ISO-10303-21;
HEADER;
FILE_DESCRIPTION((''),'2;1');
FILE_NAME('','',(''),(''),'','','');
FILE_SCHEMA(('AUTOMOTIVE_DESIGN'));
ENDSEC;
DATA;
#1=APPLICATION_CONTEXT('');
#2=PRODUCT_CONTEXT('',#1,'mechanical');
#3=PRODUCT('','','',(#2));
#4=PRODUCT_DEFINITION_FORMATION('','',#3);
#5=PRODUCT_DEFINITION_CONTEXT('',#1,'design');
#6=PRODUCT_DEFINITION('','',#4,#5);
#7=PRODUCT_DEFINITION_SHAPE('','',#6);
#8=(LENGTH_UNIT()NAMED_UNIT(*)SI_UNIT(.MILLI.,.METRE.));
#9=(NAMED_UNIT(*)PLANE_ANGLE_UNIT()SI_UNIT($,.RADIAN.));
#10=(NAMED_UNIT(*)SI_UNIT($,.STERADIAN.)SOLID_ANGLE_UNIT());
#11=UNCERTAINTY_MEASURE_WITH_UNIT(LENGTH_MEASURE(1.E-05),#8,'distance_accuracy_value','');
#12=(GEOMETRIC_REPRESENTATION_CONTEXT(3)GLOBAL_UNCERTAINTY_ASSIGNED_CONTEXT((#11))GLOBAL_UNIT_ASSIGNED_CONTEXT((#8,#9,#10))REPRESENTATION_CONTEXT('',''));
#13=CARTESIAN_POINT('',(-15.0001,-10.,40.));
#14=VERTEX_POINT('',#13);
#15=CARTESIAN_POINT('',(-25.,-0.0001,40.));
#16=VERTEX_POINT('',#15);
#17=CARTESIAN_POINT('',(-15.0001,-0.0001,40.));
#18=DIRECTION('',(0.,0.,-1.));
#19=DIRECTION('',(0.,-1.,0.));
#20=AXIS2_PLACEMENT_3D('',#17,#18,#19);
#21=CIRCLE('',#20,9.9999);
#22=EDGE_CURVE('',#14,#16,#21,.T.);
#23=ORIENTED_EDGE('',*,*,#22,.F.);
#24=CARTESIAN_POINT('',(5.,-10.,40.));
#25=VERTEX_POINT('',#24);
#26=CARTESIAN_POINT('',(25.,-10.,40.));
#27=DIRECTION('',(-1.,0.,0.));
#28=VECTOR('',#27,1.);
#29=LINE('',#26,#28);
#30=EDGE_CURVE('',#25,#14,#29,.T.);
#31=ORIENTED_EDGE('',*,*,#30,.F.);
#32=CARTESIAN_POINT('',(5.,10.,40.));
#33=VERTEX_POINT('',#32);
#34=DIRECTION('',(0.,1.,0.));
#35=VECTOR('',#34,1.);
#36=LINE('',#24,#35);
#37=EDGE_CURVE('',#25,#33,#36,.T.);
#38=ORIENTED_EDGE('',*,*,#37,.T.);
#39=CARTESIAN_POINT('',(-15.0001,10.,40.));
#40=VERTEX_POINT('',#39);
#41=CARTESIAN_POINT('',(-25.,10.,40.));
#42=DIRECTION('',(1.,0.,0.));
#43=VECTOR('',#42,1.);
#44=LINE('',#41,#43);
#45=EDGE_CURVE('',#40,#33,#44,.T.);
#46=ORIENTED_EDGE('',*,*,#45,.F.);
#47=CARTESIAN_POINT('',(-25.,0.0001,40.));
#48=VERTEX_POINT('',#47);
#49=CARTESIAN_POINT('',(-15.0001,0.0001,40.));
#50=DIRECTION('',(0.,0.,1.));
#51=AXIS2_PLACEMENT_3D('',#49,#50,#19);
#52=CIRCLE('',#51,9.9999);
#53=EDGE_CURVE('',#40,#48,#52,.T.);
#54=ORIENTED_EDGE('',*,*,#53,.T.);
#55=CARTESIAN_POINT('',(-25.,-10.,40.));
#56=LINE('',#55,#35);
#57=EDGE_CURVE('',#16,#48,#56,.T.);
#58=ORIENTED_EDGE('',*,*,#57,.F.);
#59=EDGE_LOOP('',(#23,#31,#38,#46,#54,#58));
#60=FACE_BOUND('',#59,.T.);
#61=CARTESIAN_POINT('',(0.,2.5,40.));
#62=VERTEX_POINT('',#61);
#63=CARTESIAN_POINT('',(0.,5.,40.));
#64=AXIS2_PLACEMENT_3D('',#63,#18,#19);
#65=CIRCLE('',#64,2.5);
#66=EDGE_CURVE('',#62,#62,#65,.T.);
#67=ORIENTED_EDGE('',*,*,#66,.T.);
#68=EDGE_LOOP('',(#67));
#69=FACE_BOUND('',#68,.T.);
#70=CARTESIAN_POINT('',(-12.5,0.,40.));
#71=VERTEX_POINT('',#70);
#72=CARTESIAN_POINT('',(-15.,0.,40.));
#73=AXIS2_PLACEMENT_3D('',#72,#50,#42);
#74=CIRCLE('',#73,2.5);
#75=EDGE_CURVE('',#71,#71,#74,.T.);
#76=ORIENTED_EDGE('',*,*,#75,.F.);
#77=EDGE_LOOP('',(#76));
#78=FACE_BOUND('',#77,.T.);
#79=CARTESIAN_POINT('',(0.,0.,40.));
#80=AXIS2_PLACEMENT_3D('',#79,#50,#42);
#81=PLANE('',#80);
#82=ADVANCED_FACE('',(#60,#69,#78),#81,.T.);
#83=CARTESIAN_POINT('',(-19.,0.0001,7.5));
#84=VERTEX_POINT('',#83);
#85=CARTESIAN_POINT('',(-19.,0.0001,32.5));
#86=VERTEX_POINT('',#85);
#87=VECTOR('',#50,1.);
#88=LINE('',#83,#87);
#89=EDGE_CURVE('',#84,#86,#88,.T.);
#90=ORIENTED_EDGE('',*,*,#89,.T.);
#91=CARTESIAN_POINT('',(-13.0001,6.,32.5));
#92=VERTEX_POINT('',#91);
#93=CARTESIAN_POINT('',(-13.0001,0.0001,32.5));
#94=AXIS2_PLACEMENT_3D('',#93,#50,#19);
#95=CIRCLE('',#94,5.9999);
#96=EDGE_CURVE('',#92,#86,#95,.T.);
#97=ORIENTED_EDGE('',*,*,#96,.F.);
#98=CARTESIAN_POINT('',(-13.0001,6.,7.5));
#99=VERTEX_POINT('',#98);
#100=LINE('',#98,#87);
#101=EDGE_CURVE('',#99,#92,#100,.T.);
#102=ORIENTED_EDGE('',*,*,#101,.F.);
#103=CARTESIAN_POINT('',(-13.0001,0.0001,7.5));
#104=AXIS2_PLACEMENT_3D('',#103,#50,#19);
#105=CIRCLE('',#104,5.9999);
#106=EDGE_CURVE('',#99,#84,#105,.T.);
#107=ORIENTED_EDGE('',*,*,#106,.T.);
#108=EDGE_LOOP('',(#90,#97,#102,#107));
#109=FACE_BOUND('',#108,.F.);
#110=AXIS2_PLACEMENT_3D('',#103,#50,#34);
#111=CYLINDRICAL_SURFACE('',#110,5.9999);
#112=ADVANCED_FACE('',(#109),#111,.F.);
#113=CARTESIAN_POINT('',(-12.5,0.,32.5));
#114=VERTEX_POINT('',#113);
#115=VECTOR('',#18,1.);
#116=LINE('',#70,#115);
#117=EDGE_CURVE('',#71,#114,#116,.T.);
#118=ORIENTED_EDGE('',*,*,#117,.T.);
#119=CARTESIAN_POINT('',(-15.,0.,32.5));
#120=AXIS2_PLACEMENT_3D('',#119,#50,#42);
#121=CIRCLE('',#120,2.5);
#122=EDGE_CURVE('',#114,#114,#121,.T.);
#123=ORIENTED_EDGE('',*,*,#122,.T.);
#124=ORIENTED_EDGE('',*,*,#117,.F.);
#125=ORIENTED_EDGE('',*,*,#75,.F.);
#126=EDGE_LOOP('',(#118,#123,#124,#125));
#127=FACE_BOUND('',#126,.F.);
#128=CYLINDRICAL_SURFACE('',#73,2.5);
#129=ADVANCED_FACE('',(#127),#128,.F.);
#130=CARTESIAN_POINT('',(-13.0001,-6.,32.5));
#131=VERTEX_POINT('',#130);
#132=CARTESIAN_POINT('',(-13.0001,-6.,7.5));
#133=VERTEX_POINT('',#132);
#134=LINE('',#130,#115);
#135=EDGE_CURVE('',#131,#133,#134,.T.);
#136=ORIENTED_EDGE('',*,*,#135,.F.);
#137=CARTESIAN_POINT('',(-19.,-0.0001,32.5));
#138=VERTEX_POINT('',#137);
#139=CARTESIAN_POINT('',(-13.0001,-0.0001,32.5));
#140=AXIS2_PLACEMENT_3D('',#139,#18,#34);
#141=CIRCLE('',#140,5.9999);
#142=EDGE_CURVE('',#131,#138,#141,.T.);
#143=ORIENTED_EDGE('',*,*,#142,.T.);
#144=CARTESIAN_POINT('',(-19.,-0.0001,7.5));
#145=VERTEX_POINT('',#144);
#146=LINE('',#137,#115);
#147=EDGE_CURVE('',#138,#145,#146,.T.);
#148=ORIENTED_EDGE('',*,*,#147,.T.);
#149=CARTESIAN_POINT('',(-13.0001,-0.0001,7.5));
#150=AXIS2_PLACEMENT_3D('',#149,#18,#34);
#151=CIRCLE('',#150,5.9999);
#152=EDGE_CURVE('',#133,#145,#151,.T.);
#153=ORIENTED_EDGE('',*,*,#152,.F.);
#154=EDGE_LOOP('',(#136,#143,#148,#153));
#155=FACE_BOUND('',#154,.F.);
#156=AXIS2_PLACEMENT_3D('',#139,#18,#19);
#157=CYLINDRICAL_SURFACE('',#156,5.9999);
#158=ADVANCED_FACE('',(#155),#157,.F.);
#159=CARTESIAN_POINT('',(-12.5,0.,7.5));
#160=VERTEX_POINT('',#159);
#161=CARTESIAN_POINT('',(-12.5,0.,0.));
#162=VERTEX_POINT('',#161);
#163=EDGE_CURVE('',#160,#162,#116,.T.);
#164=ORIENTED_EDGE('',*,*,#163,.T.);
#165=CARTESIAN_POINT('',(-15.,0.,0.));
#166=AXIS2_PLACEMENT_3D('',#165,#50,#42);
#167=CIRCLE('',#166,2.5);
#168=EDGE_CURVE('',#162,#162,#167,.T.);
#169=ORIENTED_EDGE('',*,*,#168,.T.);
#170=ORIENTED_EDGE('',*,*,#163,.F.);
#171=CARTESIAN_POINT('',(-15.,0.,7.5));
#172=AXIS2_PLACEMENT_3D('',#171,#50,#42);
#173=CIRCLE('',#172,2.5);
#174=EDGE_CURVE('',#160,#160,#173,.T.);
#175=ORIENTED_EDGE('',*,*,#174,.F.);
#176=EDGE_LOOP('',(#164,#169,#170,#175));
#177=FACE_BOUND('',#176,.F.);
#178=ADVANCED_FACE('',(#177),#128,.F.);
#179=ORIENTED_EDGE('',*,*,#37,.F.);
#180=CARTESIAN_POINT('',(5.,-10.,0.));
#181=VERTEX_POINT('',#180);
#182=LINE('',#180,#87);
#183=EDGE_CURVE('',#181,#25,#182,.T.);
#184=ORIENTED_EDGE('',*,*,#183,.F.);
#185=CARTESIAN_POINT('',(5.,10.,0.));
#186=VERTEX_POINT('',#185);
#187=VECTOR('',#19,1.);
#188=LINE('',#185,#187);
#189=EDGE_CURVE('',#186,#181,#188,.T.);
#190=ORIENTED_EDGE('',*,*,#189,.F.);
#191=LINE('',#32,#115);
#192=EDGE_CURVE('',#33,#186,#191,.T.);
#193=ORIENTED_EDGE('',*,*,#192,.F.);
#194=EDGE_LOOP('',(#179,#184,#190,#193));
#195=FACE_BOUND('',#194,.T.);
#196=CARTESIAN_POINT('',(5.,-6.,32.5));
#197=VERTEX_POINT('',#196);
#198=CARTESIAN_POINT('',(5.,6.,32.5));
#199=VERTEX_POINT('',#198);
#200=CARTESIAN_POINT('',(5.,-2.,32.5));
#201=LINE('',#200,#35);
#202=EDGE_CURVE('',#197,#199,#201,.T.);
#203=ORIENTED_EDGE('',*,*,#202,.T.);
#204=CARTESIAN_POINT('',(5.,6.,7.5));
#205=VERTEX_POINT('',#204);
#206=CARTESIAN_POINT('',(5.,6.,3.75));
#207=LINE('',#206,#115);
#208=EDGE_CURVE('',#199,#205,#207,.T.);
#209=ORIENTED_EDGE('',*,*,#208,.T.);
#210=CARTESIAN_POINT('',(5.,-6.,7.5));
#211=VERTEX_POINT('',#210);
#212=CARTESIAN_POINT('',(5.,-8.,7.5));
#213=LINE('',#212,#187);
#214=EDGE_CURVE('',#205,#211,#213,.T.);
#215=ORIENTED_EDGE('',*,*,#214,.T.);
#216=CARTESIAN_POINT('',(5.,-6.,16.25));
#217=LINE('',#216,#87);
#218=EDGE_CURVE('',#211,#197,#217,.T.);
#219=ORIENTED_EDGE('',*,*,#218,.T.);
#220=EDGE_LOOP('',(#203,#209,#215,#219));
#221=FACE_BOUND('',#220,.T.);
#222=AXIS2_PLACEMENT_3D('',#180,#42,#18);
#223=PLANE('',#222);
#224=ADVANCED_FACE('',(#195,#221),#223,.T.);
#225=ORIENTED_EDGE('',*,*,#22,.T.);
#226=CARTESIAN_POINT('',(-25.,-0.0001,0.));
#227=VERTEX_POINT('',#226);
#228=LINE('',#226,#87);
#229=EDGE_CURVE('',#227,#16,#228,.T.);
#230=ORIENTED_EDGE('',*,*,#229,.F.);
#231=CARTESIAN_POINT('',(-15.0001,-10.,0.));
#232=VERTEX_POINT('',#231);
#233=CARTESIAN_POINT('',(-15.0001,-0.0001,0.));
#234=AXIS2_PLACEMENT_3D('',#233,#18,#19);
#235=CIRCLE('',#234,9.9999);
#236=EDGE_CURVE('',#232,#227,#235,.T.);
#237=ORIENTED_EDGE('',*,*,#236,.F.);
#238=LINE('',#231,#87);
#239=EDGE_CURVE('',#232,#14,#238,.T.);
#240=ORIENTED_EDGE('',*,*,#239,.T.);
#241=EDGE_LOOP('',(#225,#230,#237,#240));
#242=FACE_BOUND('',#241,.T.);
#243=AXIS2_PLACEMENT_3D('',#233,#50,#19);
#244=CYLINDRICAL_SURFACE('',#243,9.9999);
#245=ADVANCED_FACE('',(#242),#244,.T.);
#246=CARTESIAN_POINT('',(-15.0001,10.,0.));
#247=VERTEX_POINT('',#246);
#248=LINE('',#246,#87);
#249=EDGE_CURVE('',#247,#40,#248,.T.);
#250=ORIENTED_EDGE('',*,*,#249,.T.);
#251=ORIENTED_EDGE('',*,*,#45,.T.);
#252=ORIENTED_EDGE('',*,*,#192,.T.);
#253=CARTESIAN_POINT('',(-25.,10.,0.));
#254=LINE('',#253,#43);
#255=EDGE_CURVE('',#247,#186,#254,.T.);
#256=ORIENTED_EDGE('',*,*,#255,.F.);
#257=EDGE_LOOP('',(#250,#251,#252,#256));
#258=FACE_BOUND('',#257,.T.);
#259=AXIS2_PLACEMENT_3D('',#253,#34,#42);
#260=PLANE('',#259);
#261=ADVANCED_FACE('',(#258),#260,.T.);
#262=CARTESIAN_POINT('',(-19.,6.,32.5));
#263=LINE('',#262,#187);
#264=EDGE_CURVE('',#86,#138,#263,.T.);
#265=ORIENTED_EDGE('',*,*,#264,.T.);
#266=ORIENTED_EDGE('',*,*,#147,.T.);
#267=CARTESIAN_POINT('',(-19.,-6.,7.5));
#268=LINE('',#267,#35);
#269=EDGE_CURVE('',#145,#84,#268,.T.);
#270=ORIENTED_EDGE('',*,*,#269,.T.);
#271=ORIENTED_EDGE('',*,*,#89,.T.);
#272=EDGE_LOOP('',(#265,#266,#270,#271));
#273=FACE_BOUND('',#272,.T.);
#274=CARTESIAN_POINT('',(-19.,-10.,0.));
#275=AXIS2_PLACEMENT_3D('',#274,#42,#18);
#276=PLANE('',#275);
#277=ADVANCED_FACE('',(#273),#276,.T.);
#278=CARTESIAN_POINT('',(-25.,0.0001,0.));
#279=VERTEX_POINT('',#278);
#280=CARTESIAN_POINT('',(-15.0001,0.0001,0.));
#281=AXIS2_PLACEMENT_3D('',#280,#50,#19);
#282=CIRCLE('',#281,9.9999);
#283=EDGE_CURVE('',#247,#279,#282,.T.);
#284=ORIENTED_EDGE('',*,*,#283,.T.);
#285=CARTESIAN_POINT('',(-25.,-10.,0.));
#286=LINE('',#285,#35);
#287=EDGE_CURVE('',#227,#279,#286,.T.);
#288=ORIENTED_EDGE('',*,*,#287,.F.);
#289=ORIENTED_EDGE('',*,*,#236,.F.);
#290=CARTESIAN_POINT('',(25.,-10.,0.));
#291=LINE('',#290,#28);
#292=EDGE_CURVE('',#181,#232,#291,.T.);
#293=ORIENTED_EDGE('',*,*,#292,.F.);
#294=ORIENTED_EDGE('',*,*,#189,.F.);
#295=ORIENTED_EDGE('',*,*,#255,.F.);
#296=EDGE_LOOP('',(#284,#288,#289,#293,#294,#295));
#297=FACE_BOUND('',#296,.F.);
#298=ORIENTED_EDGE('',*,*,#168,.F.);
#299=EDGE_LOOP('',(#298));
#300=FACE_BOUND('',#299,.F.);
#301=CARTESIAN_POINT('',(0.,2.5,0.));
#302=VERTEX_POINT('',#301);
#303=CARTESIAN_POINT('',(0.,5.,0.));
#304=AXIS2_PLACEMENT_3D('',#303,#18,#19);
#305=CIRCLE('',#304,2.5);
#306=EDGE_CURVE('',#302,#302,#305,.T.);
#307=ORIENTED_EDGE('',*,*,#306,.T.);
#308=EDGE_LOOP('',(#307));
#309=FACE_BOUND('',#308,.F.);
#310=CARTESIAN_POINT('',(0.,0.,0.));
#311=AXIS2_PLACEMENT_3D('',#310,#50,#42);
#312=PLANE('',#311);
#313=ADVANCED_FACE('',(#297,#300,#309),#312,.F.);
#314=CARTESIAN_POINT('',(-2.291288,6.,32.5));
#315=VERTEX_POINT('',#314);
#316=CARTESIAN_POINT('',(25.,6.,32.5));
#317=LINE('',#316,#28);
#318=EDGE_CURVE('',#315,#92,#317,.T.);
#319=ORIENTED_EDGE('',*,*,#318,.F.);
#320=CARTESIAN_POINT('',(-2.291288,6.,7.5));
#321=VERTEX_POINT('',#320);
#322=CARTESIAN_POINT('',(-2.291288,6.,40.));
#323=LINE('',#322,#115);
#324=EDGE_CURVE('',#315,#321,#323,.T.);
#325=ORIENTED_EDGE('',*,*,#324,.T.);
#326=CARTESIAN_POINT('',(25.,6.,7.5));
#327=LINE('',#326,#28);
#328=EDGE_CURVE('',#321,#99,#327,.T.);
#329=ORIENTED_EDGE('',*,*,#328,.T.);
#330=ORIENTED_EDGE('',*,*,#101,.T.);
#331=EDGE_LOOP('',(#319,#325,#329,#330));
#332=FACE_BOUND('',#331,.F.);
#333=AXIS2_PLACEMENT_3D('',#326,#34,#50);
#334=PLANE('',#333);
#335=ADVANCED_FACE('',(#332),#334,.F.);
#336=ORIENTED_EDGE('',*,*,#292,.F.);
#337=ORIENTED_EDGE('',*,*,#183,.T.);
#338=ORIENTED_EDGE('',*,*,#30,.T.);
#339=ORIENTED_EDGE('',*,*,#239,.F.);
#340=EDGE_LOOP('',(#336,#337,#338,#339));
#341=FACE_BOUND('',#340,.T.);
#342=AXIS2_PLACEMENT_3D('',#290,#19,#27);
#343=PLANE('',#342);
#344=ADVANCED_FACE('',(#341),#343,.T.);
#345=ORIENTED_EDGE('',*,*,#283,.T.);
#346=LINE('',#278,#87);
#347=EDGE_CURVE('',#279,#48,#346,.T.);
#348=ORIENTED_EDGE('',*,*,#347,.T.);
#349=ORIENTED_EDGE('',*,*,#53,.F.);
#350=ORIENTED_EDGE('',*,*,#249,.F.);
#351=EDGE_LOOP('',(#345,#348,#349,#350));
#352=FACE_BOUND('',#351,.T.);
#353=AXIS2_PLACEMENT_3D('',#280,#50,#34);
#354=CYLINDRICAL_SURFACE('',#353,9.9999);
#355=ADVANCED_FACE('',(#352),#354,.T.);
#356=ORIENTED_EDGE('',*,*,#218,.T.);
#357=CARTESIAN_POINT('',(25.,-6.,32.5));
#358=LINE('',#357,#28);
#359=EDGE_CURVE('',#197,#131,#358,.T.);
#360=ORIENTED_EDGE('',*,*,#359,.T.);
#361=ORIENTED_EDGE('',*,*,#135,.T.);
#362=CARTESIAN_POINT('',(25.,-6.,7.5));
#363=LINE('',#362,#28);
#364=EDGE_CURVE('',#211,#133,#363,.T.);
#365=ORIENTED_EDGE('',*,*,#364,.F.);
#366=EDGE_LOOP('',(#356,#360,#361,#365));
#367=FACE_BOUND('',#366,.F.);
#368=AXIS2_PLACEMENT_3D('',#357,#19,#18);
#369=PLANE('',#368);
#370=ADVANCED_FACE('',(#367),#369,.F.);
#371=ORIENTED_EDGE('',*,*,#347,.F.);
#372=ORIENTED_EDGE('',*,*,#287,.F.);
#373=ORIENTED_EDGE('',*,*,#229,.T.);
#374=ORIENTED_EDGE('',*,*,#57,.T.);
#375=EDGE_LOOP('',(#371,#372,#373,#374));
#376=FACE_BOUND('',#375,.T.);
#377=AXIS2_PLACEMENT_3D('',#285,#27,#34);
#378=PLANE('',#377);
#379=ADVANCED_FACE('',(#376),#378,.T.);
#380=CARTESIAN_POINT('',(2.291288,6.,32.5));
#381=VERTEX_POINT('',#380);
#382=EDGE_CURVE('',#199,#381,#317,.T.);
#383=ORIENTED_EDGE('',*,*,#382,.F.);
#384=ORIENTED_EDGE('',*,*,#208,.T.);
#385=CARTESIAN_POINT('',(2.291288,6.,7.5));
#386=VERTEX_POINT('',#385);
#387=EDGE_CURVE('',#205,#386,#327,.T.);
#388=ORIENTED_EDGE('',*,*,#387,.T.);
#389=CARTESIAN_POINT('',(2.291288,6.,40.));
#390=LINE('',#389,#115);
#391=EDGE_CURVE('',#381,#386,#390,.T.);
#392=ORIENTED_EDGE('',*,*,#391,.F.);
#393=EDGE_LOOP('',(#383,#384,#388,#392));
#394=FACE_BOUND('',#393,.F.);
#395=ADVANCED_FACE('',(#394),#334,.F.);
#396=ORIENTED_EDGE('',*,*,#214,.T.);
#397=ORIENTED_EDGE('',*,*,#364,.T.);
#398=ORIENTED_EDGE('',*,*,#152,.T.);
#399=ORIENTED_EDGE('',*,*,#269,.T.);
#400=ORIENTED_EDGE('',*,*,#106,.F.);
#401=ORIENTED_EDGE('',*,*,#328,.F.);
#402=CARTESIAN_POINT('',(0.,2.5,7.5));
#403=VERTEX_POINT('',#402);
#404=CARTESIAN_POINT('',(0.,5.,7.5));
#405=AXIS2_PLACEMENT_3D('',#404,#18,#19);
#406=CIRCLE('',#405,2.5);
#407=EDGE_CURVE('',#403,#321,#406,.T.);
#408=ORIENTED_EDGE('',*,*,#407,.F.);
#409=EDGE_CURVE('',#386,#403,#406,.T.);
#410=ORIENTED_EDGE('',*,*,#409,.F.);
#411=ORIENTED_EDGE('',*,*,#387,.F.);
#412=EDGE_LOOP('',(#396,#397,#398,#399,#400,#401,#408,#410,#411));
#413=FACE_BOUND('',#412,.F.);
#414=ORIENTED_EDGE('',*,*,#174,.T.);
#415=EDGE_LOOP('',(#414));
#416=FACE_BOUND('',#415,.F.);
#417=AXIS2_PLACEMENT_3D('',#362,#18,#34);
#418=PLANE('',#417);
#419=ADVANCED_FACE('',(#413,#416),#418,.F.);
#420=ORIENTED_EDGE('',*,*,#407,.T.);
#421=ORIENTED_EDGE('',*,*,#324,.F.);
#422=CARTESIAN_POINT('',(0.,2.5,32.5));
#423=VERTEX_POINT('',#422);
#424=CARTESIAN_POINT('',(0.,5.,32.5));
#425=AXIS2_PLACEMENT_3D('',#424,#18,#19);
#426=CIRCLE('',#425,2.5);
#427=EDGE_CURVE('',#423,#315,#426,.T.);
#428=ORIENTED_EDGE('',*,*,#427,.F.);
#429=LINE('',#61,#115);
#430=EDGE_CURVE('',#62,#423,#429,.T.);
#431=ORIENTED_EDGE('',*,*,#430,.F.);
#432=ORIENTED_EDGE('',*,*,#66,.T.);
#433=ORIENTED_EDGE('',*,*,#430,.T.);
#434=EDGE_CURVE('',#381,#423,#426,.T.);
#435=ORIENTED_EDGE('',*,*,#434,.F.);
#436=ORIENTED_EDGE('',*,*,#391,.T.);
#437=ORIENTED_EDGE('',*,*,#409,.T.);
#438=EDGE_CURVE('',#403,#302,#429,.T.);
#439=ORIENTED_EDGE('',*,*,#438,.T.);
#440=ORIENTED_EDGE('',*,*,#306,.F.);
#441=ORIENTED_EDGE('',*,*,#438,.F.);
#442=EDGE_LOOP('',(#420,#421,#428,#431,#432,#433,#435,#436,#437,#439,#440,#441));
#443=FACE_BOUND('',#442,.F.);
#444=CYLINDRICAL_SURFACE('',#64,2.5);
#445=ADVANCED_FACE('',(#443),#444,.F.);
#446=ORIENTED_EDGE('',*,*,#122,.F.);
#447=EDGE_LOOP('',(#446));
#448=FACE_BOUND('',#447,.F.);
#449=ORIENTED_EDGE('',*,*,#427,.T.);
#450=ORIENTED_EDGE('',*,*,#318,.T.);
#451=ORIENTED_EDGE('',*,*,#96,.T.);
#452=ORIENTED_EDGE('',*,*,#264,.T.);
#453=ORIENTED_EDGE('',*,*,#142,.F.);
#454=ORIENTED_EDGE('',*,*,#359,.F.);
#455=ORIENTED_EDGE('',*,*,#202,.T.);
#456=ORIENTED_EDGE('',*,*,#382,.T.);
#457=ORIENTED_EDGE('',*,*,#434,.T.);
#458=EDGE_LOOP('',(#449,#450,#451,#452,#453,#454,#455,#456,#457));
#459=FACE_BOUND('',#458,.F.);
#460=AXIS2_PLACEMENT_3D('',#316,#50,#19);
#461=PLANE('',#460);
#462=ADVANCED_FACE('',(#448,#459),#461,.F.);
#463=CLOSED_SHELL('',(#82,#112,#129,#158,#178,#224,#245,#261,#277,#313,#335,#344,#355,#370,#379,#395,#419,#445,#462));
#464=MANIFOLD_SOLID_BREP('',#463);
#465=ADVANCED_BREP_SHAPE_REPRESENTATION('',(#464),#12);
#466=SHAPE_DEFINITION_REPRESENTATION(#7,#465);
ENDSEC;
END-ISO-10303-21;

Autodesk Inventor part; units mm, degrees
ref_plane "YZ Plane" through (0, 0, 0) normal (1, 0, 0) x (0, 1, 0)
ref_plane "XZ Plane" through (0, 0, 0) normal (0, 1, 0) x (-1, 0, 0)
ref_plane "XY Plane" through (0, 0, 0) normal (0, 0, 1) x (1, 0, 0)
sketch "Sketch1" plane through (0, 0, 0) normal (0, 0, 1) x (1, 0, 0)
  line L0 (-25, 10) -> (25, 10)
  line L1 (25, 10) -> (25, -10)
  line L2 (25, -10) -> (-25, -10)
  line L3 (-25, -10) -> (-25, 10)
  line L4 (-25, 10) -> (25, -10) construction
  line L5 (25, 10) -> (-25, -10) construction
  point P0 (0, 0)
  dimension "d0" = 50
  dimension "d1" = 20
extrude "Extrusion1" add sketch "Sketch1" along normal blind 40
sketch "Sketch2" plane through (0, 0, 40) normal (0, 0, 1) x (1, 0, 0)
  circle A0 centre (-15, 0) radius 2.5
  line L0 (-25, 10) -> (-25, -10) projected
  line L1 (-25, -10) -> (25, -10) projected
  point P0 (0, 0)
  dimension "d4" = 5
  dimension "d5" = 10
  dimension "d6" = 10
extrude "Extrusion2" cut sketch "Sketch2" against normal through all
sketch "Sketch3" plane through (25, -10, 0) normal (1, 0, 0) x (0, 0, -1)
  line L0 (-32.5, 4) -> (-7.5, 4)
  line L1 (-7.5, 4) -> (-7.5, 16)
  line L2 (-7.5, 16) -> (-32.5, 16)
  line L3 (-32.5, 16) -> (-32.5, 4)
  line L4 (-32.5, 4) -> (-7.5, 16) construction
  line L5 (-7.5, 4) -> (-32.5, 16) construction
  point P0 (0, 10)
  point P1 (-20, 10)
  dimension "d9" = 25
  dimension "d10" = 12
extrude "Extrusion3" cut sketch "Sketch3" against normal blind 44
full round fillet "Full Round Fillet1" first side at (10.3333, 6, 15.8333) centre faces at (-19, -2, 15.8333) second side at (10.3333, -6, 24.1667)
full round fillet "Full Round Fillet2" first side at (8.3333, 10, 13.3333) centre faces at (-25, 3.3333, 13.3333) second side at (-8.3333, -10, 13.3333)
sketch "Sketch4" plane through (25, -10, 0) normal (1, 0, 0) x (0, 0, -1)
  line L0 (-40, 0) -> (-40, 20) projected
  line L1 (0, 20) -> (0, 0) projected
  line L2 (-40, 20) -> (0, 20)
  line L3 (0, 20) -> (0, 0)
  line L4 (0, 0) -> (-40, 0)
  line L5 (-40, 0) -> (-40, 20)
  point P0 (0, 10)
extrude "Extrusion4" cut sketch "Sketch4" against normal blind 20
sketch "Sketch5" plane through (0, 0, 40) normal (0, 0, 1) x (1, 0, 0)
  line L0 (5, 10) -> (-15, 10) projected
  line L1 (5, -10) -> (5, 10) projected
  point P0 (0, 0)
  point P1 (0, 5)
  dimension "d15" = 5
  dimension "d16" = 5
hole "Hole1" at (0, 5, 40) direction (0, 0, -1) diameter 5 end through all
properties part number "3rd arm"
